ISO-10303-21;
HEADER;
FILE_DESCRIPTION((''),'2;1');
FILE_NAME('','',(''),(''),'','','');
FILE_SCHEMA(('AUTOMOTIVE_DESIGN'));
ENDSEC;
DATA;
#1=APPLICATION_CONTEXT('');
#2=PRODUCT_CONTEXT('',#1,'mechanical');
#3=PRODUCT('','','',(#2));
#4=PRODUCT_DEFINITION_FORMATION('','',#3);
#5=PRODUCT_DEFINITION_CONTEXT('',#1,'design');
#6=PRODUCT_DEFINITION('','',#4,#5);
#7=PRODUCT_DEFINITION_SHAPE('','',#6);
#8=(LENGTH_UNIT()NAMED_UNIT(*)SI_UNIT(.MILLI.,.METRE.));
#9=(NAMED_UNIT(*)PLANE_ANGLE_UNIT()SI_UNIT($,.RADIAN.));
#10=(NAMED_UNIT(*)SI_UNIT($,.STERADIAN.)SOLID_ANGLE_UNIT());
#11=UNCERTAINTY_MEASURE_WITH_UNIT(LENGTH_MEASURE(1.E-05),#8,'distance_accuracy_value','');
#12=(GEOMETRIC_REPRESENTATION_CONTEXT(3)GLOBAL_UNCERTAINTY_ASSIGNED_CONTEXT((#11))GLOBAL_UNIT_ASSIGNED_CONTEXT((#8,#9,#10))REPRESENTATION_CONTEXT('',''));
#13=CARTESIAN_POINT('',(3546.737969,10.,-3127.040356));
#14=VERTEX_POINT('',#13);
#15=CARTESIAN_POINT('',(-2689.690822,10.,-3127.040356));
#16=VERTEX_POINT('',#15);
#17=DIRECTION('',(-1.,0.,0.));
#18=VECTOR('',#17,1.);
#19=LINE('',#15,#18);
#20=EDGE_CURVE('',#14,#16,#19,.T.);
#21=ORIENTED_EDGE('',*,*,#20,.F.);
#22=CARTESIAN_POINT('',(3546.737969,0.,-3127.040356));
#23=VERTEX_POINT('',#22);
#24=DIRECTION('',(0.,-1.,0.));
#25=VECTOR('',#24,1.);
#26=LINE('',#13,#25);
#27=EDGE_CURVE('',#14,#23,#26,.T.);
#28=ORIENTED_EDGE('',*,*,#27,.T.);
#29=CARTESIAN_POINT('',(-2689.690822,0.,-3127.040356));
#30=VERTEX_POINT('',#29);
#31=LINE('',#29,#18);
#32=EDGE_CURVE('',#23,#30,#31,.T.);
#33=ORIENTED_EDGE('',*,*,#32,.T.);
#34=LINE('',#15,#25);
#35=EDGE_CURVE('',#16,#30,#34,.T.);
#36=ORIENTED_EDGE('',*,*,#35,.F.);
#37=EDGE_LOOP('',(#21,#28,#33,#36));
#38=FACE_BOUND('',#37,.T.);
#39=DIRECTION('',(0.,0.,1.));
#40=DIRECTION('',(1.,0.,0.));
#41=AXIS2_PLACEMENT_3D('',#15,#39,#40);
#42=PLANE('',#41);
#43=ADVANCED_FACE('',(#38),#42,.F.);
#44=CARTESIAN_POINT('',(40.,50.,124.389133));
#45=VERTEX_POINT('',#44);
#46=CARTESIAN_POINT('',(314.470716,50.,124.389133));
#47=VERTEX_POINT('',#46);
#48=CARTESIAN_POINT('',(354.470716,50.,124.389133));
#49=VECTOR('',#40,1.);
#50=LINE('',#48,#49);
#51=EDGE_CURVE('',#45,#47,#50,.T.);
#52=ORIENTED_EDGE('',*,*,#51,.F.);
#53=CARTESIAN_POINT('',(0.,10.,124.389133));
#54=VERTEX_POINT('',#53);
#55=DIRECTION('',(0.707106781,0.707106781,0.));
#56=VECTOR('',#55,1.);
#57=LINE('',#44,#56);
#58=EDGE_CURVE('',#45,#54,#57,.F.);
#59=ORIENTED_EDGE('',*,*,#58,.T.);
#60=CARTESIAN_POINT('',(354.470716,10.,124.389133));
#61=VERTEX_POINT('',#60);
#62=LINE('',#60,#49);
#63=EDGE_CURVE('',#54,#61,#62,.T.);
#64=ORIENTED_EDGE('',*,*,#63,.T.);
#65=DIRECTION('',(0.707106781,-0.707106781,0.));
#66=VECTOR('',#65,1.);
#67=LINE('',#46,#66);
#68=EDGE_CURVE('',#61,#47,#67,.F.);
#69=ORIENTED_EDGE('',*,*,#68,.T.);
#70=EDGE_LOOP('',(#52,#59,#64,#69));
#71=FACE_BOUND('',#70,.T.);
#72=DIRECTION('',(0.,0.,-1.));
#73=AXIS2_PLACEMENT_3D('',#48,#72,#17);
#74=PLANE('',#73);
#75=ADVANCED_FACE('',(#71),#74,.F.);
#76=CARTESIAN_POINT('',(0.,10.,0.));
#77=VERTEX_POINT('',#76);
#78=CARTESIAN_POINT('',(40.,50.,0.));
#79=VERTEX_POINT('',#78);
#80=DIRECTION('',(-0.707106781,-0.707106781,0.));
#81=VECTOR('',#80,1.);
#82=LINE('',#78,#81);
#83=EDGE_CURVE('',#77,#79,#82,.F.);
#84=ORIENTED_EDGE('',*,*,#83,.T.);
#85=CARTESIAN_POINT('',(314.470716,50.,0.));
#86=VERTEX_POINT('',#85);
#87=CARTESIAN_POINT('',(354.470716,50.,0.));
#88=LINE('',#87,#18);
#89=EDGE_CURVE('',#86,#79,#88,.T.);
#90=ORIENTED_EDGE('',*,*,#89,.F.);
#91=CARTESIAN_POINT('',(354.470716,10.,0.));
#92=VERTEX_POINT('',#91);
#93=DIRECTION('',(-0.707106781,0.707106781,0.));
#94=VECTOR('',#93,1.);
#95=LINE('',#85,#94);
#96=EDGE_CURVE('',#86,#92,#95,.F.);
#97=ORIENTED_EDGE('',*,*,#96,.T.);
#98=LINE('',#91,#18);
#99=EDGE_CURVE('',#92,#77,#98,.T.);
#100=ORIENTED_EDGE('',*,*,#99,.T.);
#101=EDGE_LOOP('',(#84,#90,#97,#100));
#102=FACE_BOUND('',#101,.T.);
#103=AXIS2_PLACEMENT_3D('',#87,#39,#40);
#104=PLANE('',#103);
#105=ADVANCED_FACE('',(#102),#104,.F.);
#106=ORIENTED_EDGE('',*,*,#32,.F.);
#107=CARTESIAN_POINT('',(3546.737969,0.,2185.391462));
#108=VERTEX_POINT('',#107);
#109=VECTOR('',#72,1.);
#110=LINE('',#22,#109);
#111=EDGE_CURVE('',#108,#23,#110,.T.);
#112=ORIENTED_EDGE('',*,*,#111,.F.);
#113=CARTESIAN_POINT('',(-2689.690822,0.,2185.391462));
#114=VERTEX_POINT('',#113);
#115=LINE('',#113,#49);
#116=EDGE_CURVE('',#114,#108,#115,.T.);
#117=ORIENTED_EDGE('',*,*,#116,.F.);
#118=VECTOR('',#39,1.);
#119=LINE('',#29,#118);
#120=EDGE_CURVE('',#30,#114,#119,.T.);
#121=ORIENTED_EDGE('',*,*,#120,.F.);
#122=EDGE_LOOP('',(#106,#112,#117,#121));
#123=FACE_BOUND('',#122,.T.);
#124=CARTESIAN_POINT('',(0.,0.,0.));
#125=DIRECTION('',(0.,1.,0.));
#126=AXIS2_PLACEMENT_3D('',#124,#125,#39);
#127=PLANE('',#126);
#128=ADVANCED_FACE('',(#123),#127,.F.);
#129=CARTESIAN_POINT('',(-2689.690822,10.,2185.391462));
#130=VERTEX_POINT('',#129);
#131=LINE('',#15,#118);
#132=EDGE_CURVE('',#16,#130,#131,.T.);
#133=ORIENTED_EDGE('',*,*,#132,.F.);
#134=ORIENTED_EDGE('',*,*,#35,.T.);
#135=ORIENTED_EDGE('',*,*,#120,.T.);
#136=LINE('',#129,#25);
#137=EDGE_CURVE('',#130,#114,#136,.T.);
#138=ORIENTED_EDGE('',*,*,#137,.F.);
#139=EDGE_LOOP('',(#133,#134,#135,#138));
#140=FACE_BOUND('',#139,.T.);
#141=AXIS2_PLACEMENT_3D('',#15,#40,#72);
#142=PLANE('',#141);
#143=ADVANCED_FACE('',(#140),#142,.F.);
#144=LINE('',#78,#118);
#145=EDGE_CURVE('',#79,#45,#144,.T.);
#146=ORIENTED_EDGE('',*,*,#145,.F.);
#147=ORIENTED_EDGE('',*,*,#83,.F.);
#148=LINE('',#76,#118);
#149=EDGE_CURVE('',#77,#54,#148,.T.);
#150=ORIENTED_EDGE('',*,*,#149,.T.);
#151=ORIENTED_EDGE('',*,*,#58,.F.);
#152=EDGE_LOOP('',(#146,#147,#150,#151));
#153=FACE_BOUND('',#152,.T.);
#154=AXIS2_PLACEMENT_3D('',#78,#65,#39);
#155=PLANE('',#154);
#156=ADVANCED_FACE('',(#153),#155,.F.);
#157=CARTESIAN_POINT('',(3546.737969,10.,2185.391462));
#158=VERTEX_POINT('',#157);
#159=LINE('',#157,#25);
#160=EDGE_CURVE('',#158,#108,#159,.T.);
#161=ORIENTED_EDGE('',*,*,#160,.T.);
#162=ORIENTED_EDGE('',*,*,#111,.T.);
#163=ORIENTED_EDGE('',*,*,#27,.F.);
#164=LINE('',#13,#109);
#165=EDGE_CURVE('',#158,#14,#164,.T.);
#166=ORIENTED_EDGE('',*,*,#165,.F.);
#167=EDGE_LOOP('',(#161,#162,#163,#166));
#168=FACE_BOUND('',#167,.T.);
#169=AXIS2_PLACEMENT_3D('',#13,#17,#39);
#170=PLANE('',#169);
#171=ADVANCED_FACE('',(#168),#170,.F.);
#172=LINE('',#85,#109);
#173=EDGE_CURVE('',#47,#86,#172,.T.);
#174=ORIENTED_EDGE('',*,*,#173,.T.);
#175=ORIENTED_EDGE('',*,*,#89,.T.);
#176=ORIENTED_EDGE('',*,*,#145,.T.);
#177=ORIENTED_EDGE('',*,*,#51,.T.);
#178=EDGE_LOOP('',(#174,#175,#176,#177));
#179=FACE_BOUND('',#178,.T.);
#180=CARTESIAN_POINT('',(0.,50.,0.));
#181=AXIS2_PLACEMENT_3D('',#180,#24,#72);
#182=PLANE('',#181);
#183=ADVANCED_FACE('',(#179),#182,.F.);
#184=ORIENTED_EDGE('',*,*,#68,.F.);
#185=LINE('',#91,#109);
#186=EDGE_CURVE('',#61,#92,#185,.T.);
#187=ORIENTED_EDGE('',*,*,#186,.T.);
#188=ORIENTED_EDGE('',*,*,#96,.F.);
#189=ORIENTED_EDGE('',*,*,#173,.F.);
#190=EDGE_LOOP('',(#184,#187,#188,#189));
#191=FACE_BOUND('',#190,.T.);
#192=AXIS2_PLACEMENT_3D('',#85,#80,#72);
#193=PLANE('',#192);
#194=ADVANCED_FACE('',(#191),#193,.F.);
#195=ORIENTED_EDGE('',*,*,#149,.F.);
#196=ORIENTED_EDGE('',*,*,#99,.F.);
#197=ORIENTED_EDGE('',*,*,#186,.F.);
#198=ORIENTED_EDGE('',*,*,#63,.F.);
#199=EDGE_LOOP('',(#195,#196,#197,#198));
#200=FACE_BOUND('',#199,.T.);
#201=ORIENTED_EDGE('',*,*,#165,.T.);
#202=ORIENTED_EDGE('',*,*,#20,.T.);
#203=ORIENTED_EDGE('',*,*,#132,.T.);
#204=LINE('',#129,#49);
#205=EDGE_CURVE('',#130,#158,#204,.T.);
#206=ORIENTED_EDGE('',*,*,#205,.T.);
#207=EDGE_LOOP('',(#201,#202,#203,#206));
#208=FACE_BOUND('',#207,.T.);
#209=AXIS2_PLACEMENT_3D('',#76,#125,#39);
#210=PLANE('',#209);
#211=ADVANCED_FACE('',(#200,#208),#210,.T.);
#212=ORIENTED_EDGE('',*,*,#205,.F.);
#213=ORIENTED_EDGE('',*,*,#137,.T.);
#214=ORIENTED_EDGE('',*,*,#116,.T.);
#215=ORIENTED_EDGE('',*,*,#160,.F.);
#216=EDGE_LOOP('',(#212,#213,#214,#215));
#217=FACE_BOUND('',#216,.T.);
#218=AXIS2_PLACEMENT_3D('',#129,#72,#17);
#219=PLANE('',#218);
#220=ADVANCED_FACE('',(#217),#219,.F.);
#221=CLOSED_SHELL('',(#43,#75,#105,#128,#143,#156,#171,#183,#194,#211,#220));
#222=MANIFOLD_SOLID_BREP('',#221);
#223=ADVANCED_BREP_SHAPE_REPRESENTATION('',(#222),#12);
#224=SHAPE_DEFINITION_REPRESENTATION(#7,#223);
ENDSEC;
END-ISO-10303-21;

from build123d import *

# Parameters (mm, degrees)
SKETCH1_W           = 6236.428790575
SKETCH1_H           = 5312.431817201
BOSS_EXTRUDE1_DEPTH = 10
SKETCH2_W           = 354.470716076
SKETCH2_H           = 124.389132605
BOSS_EXTRUDE2_DEPTH = 40
CHAMFER1_SIZE       = 40


with BuildPart() as part:
    # Sketch1 → Boss-Extrude1 (new body)
    with BuildSketch(Plane(origin=(0, 0, 0), x_dir=(1, 0, 0), z_dir=(0, 1, 0))):
        with Locations((428.523573662, 470.824447086)):
            Rectangle(SKETCH1_W, SKETCH1_H)
    extrude(amount=BOSS_EXTRUDE1_DEPTH)

    # Sketch2 → Boss-Extrude2 (add)
    with BuildSketch(Plane(origin=(0, 10, 0), x_dir=(1, 0, 0), z_dir=(0, 1, 0))):
        with Locations((177.235358038, -62.194566303)):
            Rectangle(SKETCH2_W, SKETCH2_H)
    extrude(amount=BOSS_EXTRUDE2_DEPTH)

    # Chamfer1
    chamfer1_edges = [part.edges().sort_by_distance(p)[0] for p in [
        (354.470716076, 50, 62.194566303),
        (0, 50, 62.194566303),
    ]]
    chamfer(chamfer1_edges, length=CHAMFER1_SIZE - 0.0001)  # a hair under: the kernel refuses the full size


solid = part.part
